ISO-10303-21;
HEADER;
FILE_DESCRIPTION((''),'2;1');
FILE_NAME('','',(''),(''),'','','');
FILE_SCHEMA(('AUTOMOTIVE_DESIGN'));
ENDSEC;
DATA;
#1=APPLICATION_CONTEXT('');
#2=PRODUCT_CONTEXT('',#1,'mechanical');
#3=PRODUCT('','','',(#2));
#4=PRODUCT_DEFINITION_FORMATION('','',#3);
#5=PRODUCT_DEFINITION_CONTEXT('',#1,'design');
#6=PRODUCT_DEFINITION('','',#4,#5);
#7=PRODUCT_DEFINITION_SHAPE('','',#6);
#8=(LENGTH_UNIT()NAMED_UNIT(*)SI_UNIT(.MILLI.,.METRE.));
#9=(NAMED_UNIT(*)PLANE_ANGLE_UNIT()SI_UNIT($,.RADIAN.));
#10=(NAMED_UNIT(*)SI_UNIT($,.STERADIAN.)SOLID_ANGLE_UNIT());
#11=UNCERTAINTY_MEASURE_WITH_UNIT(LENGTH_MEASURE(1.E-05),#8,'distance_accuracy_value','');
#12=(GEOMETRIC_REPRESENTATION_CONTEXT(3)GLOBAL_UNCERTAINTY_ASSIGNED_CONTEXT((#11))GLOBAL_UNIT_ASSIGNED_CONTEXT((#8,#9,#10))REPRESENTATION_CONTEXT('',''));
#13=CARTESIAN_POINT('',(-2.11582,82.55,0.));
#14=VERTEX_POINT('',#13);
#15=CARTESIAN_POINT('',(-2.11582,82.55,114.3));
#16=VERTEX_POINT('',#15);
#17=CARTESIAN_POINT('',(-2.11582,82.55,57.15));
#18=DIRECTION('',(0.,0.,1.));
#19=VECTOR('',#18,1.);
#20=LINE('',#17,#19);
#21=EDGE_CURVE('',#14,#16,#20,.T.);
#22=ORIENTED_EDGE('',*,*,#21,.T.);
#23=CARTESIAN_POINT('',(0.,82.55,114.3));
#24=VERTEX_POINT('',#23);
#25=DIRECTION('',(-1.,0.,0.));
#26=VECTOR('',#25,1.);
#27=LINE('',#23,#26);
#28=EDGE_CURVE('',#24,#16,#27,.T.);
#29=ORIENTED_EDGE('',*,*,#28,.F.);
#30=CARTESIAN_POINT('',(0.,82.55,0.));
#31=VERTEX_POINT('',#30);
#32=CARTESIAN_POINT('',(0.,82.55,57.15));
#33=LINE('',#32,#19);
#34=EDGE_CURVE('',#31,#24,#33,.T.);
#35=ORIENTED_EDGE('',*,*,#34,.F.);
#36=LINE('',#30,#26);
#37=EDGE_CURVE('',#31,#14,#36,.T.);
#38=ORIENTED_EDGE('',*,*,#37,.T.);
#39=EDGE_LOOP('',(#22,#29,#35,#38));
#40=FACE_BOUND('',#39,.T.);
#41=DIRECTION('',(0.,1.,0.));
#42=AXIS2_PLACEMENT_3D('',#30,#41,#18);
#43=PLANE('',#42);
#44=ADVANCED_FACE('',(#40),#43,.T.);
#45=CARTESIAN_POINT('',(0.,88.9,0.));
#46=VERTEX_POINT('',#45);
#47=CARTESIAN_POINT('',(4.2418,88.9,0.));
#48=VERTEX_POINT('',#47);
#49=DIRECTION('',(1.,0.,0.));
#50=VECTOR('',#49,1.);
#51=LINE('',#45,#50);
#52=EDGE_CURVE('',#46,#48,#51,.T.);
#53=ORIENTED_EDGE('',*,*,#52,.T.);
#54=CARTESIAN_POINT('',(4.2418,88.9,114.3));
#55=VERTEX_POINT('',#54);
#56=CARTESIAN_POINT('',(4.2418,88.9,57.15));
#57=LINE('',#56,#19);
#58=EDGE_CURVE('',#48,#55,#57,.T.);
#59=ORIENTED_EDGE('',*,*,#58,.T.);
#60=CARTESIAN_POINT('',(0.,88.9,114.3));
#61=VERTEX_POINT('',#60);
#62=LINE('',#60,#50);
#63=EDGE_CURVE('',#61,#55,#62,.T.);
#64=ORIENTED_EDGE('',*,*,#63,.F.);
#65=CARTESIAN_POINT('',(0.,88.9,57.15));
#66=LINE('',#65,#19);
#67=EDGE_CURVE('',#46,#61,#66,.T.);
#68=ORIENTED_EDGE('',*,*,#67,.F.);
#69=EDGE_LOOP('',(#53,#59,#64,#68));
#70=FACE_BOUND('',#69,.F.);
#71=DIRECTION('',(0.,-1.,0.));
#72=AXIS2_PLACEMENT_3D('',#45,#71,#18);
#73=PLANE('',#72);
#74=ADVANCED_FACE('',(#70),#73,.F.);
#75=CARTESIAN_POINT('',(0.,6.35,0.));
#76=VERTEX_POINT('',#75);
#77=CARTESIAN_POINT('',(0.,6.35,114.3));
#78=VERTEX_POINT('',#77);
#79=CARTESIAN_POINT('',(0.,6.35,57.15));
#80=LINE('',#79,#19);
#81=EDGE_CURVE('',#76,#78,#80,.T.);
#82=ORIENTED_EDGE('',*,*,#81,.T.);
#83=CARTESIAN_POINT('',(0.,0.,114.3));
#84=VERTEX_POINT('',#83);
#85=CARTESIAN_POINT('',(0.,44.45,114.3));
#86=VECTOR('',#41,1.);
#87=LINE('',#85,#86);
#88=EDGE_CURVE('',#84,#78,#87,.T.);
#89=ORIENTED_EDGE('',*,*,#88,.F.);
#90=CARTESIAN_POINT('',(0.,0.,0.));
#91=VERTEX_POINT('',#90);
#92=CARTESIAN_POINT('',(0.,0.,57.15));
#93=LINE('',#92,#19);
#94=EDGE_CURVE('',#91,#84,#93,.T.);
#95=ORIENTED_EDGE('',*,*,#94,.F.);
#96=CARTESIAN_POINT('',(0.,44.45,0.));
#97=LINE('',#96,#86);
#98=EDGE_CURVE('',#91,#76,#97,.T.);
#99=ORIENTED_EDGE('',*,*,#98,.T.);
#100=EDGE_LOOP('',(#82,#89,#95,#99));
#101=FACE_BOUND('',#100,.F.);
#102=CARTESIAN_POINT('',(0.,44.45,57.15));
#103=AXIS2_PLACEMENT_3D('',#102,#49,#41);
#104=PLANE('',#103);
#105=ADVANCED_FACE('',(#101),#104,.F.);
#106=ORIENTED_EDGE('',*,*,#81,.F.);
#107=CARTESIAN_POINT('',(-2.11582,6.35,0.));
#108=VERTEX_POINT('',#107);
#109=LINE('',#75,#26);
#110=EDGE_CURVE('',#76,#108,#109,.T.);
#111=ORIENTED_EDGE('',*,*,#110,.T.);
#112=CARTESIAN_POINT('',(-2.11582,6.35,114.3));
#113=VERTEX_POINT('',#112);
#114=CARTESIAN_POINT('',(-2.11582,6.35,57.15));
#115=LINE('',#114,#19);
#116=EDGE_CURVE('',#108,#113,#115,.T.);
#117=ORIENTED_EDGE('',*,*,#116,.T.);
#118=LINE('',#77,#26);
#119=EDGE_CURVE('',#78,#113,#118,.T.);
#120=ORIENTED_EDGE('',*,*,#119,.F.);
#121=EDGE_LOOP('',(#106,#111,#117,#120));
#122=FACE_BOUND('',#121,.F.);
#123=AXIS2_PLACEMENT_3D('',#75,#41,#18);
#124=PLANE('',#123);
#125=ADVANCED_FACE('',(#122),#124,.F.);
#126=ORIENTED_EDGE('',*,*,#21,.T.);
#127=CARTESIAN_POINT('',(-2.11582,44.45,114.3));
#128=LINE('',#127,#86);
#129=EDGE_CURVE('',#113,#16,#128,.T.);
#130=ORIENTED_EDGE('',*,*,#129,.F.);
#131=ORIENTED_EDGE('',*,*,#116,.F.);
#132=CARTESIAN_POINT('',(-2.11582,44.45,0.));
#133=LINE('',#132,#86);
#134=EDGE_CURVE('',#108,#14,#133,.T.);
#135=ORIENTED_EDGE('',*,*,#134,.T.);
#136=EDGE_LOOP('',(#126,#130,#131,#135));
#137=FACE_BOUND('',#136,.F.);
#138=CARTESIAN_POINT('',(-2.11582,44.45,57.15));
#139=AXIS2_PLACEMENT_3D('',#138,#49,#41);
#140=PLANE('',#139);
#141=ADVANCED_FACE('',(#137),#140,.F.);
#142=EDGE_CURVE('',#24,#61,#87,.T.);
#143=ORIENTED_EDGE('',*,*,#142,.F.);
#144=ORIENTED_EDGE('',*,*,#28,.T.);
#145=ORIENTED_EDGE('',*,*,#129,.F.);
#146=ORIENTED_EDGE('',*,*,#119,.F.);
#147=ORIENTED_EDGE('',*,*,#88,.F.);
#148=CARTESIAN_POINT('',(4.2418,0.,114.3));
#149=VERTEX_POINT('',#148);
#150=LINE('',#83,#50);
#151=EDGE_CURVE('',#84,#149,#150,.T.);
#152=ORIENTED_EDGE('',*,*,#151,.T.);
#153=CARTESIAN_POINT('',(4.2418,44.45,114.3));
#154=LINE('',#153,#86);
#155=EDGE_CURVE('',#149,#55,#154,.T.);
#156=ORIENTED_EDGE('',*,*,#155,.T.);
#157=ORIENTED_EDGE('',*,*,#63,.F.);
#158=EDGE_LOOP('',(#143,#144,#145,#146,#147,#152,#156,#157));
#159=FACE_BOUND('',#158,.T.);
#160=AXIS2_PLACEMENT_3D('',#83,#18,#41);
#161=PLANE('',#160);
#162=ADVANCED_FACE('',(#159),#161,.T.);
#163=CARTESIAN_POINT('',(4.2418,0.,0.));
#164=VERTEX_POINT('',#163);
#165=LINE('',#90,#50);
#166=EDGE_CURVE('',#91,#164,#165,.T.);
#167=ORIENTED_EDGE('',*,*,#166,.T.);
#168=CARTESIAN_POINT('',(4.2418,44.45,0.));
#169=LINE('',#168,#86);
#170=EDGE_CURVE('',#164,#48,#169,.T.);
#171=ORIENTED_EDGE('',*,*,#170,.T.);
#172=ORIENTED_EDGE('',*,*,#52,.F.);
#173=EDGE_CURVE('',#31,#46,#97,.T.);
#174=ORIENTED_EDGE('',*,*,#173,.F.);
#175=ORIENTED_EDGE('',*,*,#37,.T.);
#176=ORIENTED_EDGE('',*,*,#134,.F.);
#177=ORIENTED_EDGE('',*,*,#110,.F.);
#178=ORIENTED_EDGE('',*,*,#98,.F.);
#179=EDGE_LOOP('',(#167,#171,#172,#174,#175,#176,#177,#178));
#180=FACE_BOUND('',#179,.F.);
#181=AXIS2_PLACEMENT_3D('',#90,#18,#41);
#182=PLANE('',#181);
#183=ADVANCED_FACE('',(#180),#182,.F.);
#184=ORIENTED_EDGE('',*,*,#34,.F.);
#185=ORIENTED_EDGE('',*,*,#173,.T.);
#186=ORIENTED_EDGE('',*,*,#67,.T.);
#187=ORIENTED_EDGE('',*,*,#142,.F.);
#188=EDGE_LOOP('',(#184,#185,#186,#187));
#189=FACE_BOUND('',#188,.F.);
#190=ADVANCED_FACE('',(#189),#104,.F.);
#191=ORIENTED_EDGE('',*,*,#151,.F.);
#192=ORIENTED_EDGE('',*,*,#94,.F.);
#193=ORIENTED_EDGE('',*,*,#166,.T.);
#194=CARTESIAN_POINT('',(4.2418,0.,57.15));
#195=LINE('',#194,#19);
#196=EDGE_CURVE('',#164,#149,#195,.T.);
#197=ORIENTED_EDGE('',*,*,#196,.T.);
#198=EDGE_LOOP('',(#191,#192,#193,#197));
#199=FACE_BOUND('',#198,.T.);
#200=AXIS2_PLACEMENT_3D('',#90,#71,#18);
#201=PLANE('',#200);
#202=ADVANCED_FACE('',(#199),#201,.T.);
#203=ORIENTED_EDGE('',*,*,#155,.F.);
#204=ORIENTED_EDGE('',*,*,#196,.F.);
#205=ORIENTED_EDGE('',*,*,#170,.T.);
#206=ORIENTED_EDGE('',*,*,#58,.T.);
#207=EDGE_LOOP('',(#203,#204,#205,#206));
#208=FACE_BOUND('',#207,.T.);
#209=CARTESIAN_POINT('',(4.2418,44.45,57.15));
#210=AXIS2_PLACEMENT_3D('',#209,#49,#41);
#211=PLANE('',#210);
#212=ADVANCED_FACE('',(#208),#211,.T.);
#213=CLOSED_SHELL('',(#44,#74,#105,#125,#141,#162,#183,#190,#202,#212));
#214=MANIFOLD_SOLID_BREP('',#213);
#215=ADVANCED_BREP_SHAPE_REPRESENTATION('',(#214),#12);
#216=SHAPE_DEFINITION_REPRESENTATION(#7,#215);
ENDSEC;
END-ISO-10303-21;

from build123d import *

# Parameters (mm, degrees)
F0_W     = 88.9
F0_H     = 114.3
F1_DEPTH = 4.2418
F2_W     = 76.2
F2_H     = 114.3
F3_DEPTH = 2.11582


# Not quite as in the source:
# - a feature names something its author has since deleted; it is built from what else it names


with BuildPart() as f1:
    # F0 (on Right) → F1 (new body)
    with BuildSketch(Plane.YZ):
        with Locations((44.45, 57.15)):
            Rectangle(F0_W, F0_H)
    extrude(amount=F1_DEPTH)

    # F2 (on Right) → F3 (join)
    with BuildSketch(Plane.YZ):
        with Locations((44.45, 57.15)):
            Rectangle(F2_W, F2_H)
    extrude(amount=-F3_DEPTH)


solid = f1.part
